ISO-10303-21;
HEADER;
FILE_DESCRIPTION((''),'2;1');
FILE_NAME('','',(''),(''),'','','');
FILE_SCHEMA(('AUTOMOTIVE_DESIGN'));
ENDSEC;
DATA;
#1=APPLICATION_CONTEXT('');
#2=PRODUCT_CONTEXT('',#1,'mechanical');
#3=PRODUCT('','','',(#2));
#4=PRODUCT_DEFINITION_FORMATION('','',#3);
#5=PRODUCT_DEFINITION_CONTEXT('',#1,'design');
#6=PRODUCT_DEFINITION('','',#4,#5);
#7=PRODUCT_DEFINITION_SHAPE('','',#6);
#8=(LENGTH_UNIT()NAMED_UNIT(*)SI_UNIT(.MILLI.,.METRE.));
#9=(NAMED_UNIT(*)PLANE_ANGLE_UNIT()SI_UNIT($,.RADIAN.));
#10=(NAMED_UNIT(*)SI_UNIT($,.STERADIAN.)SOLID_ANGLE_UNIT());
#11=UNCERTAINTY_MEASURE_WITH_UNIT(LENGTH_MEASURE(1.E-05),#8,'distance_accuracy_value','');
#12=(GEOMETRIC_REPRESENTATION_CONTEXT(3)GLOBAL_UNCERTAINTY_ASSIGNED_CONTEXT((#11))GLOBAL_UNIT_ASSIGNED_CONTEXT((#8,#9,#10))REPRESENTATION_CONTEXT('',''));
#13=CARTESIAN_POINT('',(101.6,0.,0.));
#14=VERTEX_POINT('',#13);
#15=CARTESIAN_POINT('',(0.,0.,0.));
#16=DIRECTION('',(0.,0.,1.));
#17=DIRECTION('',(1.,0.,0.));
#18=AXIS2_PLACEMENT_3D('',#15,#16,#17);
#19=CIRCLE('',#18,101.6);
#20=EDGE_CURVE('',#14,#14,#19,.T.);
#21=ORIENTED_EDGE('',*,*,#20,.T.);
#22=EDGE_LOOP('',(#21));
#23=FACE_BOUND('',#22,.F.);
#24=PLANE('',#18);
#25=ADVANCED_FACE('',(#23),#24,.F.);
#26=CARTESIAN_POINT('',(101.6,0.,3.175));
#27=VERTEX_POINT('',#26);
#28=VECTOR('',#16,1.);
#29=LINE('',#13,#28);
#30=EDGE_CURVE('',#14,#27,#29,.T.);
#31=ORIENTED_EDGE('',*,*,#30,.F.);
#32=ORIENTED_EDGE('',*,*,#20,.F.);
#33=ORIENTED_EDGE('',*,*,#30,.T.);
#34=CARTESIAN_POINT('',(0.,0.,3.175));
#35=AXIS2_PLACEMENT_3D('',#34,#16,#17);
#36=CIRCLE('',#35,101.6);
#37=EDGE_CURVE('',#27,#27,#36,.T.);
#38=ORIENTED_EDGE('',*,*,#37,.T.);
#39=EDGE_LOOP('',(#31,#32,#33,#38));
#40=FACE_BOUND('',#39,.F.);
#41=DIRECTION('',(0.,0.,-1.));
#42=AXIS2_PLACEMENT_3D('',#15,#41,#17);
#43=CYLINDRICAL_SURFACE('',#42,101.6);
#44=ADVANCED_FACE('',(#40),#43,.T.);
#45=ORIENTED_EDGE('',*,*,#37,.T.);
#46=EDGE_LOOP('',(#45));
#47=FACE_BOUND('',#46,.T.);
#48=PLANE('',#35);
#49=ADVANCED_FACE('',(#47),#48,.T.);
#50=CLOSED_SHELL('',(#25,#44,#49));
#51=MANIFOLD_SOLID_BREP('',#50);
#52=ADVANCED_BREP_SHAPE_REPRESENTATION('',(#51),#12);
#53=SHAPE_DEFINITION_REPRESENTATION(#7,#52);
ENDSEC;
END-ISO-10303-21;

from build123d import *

# Parameters (mm, degrees)
F0_R     = 101.6
F1_DEPTH = 3.175


# Not quite as in the source:
# - a length typed as a fraction of an inch, garbled in the dataset ("3 / 203.2 mm" for 3/8 in), is restored


with BuildPart() as f1:
    # F0 (on Top) → F1 (new body)
    with BuildSketch(Plane.XY):
        Circle(F0_R)
    extrude(amount=F1_DEPTH)


solid = f1.part
